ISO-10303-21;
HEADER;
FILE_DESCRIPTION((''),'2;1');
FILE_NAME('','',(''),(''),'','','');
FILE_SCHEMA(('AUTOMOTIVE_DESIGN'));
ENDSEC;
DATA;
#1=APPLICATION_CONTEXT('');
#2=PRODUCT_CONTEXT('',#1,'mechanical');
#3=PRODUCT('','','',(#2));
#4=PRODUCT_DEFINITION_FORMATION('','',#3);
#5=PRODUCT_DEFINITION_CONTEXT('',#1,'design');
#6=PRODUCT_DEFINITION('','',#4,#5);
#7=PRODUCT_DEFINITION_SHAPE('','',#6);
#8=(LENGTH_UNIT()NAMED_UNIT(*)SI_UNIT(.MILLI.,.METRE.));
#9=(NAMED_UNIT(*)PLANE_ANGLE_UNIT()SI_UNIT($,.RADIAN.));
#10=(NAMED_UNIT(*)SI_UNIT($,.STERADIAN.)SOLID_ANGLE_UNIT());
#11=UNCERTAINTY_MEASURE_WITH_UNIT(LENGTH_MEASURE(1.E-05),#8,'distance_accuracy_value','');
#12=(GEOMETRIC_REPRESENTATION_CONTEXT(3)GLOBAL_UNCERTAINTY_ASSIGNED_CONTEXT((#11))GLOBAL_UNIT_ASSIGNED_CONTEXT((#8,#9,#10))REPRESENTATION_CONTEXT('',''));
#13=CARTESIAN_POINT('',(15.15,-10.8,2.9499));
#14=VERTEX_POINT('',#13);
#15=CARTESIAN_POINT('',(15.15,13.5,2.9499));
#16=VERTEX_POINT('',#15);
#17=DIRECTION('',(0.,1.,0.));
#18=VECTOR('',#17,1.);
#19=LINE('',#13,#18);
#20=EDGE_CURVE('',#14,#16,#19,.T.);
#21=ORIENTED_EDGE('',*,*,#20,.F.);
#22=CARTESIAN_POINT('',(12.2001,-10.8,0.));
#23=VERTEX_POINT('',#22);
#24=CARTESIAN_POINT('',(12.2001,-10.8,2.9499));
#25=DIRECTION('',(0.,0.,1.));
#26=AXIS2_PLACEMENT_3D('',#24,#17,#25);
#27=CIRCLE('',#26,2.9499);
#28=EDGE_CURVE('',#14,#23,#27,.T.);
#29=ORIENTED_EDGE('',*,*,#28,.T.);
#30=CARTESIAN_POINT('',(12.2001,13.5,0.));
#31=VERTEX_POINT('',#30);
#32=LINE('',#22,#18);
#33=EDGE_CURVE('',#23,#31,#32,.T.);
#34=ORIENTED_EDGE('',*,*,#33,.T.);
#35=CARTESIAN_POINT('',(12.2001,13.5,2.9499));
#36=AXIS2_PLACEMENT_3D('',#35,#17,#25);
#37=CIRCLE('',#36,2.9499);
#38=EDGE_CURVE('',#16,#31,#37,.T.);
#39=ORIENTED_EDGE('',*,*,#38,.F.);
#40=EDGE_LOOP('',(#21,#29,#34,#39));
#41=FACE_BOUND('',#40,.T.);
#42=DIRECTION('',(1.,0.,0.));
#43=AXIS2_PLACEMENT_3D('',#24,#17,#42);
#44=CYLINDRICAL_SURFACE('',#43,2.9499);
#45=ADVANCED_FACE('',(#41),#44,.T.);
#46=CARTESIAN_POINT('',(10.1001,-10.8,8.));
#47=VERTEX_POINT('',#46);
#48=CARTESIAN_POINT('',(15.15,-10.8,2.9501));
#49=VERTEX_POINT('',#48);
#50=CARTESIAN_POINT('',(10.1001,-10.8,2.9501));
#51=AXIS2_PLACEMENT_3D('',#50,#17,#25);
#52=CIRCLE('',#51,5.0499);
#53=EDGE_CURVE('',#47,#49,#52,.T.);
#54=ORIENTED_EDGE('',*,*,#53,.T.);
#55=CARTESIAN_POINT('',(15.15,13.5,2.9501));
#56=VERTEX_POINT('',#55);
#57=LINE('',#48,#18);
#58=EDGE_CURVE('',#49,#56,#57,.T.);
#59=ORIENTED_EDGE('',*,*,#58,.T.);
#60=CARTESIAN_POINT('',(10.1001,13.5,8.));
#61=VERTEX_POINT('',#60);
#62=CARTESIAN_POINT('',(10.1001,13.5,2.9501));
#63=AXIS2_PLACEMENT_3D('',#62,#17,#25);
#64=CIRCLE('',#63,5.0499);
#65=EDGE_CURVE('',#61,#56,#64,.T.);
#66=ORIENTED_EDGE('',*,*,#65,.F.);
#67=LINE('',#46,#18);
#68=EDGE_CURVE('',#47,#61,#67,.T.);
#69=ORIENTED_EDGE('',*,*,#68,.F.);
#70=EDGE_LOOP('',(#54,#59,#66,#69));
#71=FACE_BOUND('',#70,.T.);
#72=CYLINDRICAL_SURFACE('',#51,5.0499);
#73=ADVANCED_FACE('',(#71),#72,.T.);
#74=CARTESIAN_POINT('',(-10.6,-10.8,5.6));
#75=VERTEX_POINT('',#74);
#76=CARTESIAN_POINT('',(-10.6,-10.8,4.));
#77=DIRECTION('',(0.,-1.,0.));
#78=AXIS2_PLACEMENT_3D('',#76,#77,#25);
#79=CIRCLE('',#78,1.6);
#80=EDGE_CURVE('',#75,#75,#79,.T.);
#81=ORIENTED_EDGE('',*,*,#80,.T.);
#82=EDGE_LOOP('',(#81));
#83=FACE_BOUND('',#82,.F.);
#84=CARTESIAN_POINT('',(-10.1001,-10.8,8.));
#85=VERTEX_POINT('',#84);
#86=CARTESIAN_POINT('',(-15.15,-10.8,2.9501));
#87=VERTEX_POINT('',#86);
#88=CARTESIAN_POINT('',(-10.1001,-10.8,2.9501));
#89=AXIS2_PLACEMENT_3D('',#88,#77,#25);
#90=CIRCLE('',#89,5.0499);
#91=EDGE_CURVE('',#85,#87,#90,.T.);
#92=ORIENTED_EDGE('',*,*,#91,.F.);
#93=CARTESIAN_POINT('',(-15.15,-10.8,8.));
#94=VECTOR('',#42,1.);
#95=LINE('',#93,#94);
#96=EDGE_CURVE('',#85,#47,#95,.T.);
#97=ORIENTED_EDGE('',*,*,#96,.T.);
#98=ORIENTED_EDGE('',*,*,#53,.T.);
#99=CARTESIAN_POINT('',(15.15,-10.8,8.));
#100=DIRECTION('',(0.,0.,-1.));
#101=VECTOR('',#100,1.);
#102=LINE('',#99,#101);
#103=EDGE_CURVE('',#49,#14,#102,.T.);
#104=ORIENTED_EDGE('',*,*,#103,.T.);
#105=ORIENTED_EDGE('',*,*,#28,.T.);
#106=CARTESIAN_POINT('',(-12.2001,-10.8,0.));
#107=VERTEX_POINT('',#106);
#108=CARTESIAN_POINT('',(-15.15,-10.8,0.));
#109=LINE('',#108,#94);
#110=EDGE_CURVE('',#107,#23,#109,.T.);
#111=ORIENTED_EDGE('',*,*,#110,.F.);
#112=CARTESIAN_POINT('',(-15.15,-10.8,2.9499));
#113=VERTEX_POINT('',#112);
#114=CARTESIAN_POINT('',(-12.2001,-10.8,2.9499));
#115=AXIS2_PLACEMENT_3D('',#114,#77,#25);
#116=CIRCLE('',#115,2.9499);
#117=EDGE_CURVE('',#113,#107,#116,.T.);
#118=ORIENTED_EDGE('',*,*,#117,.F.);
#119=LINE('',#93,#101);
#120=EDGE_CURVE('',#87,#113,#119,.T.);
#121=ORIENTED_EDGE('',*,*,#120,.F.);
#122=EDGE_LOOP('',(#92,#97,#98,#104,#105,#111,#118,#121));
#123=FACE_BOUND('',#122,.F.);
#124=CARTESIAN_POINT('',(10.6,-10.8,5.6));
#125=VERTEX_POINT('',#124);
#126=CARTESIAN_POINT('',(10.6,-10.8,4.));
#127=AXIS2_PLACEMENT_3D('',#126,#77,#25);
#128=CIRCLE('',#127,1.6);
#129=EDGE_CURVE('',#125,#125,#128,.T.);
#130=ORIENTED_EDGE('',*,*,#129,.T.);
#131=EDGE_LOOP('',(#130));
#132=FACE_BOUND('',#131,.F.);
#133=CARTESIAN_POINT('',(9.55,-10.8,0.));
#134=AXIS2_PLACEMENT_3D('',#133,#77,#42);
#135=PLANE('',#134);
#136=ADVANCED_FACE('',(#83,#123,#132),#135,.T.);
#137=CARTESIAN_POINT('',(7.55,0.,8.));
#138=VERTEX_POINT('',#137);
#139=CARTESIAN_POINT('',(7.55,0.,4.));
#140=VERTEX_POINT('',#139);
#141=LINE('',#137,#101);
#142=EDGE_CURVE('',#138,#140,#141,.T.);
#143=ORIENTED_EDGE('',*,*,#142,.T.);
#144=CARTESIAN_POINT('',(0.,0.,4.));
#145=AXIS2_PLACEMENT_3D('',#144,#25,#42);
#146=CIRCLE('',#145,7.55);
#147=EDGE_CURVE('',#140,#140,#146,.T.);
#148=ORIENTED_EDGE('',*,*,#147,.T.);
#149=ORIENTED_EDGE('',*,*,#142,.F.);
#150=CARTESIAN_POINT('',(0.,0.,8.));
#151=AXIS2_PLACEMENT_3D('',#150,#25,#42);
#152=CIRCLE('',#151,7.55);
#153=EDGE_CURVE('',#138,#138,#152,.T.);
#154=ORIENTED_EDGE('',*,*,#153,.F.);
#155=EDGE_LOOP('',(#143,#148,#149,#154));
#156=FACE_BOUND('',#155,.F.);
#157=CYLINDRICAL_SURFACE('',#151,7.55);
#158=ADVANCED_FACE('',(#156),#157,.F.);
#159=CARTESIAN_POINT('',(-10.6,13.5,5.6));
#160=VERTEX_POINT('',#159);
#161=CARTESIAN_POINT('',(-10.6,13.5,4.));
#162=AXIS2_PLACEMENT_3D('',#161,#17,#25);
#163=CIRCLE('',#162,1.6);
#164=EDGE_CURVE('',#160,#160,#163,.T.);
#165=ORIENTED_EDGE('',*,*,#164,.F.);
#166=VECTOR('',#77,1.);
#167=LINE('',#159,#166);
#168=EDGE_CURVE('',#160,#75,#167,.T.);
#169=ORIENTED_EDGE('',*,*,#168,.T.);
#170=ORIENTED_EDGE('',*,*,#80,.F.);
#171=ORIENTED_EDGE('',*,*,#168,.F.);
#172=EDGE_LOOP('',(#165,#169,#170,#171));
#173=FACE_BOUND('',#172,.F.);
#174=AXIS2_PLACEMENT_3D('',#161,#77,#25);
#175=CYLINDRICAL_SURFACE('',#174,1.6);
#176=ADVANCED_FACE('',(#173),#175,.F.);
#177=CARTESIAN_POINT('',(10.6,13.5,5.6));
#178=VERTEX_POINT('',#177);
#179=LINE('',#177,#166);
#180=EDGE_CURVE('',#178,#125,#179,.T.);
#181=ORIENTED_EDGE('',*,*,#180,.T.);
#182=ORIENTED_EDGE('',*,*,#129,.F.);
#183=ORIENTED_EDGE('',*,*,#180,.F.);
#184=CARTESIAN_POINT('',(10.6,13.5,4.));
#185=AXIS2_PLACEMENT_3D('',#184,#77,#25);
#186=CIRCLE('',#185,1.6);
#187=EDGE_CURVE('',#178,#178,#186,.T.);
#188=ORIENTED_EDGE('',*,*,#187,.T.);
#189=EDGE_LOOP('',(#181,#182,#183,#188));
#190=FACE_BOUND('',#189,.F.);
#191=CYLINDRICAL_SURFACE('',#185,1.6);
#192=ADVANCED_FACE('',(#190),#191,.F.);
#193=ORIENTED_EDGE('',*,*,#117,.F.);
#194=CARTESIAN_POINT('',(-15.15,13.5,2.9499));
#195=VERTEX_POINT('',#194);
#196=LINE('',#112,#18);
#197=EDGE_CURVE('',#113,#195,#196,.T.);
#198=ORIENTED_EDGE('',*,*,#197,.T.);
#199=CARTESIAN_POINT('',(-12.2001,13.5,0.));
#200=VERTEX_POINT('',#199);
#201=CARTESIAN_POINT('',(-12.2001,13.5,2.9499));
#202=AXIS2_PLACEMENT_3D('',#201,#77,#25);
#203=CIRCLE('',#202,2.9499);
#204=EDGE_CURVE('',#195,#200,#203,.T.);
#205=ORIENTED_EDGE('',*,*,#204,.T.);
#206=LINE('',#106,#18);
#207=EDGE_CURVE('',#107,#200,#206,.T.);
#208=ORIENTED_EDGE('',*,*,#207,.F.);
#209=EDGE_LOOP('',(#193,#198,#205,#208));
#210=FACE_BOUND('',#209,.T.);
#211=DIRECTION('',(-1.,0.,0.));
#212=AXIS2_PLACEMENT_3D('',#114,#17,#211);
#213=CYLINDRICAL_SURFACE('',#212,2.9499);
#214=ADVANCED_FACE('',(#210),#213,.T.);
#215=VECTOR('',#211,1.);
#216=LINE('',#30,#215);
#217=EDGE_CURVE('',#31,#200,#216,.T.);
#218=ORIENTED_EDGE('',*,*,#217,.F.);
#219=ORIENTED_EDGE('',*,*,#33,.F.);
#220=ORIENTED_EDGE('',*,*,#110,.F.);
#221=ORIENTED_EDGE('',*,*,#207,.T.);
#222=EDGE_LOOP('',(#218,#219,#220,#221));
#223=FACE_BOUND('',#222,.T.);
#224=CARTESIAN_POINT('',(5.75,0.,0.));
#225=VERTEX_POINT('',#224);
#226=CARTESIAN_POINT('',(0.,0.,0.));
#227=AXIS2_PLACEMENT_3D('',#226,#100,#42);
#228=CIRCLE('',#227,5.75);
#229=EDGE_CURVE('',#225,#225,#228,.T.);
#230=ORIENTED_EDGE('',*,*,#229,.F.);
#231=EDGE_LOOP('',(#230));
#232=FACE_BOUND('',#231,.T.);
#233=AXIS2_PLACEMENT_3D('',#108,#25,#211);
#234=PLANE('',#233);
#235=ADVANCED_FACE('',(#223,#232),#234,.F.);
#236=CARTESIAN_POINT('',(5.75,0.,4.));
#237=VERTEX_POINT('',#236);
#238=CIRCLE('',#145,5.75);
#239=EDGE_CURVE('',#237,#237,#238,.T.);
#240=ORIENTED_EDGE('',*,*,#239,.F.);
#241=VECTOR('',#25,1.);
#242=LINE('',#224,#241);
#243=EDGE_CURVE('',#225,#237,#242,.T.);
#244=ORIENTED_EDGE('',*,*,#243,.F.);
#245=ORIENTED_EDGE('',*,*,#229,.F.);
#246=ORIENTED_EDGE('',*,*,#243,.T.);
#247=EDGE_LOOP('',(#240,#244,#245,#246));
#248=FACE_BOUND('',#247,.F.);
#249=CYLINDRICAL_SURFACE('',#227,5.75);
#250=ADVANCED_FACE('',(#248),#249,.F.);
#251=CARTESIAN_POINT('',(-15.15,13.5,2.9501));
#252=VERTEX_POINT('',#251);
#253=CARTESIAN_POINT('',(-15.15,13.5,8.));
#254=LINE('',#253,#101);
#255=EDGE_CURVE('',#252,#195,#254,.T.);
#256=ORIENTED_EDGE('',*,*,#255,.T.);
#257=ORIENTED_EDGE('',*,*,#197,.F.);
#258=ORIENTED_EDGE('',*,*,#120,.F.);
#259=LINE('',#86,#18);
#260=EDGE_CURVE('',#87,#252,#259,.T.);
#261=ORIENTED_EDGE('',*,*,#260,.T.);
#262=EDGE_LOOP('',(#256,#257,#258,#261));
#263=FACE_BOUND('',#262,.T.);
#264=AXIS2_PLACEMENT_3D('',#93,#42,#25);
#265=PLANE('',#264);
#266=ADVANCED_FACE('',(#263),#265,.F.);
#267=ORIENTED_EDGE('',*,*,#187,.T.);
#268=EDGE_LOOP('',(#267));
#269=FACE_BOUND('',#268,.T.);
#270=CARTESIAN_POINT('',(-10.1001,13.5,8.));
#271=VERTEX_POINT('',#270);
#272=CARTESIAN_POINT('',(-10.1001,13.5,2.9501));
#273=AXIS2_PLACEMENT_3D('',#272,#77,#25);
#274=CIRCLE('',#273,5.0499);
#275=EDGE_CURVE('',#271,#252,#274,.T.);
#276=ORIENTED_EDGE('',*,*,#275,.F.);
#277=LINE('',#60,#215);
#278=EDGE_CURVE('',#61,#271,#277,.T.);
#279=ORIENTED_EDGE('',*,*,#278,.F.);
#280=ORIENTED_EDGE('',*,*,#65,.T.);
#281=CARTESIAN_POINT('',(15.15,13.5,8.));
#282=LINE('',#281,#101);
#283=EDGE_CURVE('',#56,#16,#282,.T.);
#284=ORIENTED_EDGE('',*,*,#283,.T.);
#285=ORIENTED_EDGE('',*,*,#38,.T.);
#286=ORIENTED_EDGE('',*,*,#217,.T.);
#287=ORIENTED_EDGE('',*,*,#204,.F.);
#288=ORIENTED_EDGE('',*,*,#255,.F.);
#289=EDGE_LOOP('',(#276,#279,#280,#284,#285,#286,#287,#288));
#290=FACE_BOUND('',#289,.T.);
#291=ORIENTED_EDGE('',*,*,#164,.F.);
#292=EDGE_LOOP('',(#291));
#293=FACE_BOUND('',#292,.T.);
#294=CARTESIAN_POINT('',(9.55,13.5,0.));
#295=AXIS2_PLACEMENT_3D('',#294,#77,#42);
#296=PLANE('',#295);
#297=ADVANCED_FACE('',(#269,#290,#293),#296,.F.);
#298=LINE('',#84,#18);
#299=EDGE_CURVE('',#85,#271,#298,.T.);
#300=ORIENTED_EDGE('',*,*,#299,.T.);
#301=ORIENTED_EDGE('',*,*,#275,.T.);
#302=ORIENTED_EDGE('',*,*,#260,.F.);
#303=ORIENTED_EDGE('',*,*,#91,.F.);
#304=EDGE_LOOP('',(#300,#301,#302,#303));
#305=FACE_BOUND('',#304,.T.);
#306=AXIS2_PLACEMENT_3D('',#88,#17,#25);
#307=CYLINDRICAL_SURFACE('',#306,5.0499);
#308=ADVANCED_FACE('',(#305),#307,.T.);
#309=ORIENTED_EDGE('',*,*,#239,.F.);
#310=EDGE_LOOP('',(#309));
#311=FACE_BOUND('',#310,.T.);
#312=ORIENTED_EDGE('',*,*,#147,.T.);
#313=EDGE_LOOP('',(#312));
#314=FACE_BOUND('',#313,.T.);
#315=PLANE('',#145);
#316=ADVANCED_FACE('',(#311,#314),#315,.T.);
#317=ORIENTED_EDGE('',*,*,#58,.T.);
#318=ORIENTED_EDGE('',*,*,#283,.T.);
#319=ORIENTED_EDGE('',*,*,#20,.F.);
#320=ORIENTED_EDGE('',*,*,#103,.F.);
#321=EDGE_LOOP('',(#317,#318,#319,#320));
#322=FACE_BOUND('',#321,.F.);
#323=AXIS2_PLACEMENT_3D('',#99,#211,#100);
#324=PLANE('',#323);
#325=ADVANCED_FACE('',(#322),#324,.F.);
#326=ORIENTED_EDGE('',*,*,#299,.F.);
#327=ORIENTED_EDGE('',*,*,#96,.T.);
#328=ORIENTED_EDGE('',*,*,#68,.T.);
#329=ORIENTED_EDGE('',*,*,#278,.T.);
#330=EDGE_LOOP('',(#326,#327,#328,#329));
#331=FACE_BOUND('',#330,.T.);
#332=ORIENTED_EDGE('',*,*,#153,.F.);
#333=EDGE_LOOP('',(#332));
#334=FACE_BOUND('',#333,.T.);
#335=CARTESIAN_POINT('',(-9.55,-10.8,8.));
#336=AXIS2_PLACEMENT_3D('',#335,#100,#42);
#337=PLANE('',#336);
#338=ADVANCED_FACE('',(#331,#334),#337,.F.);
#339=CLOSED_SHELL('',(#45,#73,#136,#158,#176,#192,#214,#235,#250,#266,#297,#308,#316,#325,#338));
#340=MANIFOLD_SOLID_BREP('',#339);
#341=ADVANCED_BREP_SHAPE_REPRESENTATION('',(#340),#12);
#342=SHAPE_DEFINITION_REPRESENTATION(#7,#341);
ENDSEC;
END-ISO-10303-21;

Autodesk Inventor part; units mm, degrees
ref_plane "YZ Plane" through (0, 0, 0) normal (1, 0, 0) x (0, 1, 0)
ref_plane "XZ Plane" through (0, 0, 0) normal (0, 1, 0) x (-1, 0, 0)
sketch "Эскиз1" plane through (0, 0, 0) normal (0, 0, 1) x (1, 0, 0)
  circle A0 centre (0, 0) radius 5.75
  circle A1 centre (0, 0) radius 9.55
  line L0 (9.55, 13.5) -> (-9.55, 13.5)
  line L1 (-9.55, 13.5) -> (-9.55, 0)
  line L2 (-9.55, 0) -> (9.55, 0)
  line L3 (9.55, 0) -> (9.55, 13.5)
  line L4 (9.55, 0) -> (-9.55, 0)
  line L5 (-9.55, 0) -> (-9.55, -10.8)
  line L6 (-9.55, -10.8) -> (9.55, -10.8)
  line L7 (9.55, -10.8) -> (9.55, 0)
  point P0 (9.55, 0)
  point P1 (0, 9.55)
  point P2 (-9.55, 0)
  point P3 (9.55, 0)
  point P4 (-9.55, 0)
  dimension "d0" = 11.5
  dimension "d1" = 19.1
  dimension "d64" = 10.8
  dimension "d85" = 13.5
extrude "Выдавливание1" add sketch "Эскиз1" along normal blind 8 contours L2 A1 A0 | A0 L2 A1 | L7 L6 L5 A1 | A1 L1 L0 L3
sketch "Эскиз15" plane through (0, 0, 8) normal (0, 0, 1) x (1, 0, 0)
  circle A0 centre (0, 0) radius 5.75 projected
  circle A1 centre (0, 0) radius 7.55
  dimension "d67" = 15.1
extrude "Выдавливание9" cut sketch "Эскиз15" against normal blind 4
ref_plane "РабПлоскость6" through (0, -10.8, 0) normal (1, 0, 0) x (0, 0, -1)
sketch "Эскиз16" plane through (-9.55, -10.8, 0) normal (0, -1, 0) x (1, 0, 0)
  line L0 (0, 8) -> (19.1, 8) projected
  line L1 (19.1, 8) -> (24.7, 8)
  line L2 (24.7, 8) -> (24.7, 0)
  line L3 (24.7, 0) -> (19.1, 0)
  line L4 (19.1, 0) -> (19.1, 8)
  point P0 (9.55, 0)
  dimension "d70" = 5.6
  dimension "d71" = 8
extrude "Выдавливание10" add sketch "Эскиз16" against normal up to surface (24.3 mm away)
sketch "Эскиз17" plane through (-9.55, 13.5, 0) normal (0, 1, 0) x (1, 0, 0)
  line L0 (24.7, 0) -> (24.7, -8) projected
  line L1 (24.7, -4) -> (20.15, -4)
  point P0 (9.55, 0)
  dimension "d82" = 4.55
hole "Отверстие4" at (10.6, 13.5, 4) direction (0, -1, 0) diameter 3.2 end through all
fillet "Сопряжение5" radius 5.05 1 edges at (15.15, 1.35, 8)
fillet "Сопряжение5" radius 2.95 1 edges at (15.15, 1.35, 0)
mirror "Зеркальное отражение5" about plane through (0, -10.8, 0) normal (1, 0, 0) of "Сопряжение5", "Отверстие4", "Выдавливание10"
ref_plane "РабПлоскость7" through (0, -10.8, 0) normal (1, 0, 0) x (0, 0, -1)
properties part number "Крепление дифференциала"
